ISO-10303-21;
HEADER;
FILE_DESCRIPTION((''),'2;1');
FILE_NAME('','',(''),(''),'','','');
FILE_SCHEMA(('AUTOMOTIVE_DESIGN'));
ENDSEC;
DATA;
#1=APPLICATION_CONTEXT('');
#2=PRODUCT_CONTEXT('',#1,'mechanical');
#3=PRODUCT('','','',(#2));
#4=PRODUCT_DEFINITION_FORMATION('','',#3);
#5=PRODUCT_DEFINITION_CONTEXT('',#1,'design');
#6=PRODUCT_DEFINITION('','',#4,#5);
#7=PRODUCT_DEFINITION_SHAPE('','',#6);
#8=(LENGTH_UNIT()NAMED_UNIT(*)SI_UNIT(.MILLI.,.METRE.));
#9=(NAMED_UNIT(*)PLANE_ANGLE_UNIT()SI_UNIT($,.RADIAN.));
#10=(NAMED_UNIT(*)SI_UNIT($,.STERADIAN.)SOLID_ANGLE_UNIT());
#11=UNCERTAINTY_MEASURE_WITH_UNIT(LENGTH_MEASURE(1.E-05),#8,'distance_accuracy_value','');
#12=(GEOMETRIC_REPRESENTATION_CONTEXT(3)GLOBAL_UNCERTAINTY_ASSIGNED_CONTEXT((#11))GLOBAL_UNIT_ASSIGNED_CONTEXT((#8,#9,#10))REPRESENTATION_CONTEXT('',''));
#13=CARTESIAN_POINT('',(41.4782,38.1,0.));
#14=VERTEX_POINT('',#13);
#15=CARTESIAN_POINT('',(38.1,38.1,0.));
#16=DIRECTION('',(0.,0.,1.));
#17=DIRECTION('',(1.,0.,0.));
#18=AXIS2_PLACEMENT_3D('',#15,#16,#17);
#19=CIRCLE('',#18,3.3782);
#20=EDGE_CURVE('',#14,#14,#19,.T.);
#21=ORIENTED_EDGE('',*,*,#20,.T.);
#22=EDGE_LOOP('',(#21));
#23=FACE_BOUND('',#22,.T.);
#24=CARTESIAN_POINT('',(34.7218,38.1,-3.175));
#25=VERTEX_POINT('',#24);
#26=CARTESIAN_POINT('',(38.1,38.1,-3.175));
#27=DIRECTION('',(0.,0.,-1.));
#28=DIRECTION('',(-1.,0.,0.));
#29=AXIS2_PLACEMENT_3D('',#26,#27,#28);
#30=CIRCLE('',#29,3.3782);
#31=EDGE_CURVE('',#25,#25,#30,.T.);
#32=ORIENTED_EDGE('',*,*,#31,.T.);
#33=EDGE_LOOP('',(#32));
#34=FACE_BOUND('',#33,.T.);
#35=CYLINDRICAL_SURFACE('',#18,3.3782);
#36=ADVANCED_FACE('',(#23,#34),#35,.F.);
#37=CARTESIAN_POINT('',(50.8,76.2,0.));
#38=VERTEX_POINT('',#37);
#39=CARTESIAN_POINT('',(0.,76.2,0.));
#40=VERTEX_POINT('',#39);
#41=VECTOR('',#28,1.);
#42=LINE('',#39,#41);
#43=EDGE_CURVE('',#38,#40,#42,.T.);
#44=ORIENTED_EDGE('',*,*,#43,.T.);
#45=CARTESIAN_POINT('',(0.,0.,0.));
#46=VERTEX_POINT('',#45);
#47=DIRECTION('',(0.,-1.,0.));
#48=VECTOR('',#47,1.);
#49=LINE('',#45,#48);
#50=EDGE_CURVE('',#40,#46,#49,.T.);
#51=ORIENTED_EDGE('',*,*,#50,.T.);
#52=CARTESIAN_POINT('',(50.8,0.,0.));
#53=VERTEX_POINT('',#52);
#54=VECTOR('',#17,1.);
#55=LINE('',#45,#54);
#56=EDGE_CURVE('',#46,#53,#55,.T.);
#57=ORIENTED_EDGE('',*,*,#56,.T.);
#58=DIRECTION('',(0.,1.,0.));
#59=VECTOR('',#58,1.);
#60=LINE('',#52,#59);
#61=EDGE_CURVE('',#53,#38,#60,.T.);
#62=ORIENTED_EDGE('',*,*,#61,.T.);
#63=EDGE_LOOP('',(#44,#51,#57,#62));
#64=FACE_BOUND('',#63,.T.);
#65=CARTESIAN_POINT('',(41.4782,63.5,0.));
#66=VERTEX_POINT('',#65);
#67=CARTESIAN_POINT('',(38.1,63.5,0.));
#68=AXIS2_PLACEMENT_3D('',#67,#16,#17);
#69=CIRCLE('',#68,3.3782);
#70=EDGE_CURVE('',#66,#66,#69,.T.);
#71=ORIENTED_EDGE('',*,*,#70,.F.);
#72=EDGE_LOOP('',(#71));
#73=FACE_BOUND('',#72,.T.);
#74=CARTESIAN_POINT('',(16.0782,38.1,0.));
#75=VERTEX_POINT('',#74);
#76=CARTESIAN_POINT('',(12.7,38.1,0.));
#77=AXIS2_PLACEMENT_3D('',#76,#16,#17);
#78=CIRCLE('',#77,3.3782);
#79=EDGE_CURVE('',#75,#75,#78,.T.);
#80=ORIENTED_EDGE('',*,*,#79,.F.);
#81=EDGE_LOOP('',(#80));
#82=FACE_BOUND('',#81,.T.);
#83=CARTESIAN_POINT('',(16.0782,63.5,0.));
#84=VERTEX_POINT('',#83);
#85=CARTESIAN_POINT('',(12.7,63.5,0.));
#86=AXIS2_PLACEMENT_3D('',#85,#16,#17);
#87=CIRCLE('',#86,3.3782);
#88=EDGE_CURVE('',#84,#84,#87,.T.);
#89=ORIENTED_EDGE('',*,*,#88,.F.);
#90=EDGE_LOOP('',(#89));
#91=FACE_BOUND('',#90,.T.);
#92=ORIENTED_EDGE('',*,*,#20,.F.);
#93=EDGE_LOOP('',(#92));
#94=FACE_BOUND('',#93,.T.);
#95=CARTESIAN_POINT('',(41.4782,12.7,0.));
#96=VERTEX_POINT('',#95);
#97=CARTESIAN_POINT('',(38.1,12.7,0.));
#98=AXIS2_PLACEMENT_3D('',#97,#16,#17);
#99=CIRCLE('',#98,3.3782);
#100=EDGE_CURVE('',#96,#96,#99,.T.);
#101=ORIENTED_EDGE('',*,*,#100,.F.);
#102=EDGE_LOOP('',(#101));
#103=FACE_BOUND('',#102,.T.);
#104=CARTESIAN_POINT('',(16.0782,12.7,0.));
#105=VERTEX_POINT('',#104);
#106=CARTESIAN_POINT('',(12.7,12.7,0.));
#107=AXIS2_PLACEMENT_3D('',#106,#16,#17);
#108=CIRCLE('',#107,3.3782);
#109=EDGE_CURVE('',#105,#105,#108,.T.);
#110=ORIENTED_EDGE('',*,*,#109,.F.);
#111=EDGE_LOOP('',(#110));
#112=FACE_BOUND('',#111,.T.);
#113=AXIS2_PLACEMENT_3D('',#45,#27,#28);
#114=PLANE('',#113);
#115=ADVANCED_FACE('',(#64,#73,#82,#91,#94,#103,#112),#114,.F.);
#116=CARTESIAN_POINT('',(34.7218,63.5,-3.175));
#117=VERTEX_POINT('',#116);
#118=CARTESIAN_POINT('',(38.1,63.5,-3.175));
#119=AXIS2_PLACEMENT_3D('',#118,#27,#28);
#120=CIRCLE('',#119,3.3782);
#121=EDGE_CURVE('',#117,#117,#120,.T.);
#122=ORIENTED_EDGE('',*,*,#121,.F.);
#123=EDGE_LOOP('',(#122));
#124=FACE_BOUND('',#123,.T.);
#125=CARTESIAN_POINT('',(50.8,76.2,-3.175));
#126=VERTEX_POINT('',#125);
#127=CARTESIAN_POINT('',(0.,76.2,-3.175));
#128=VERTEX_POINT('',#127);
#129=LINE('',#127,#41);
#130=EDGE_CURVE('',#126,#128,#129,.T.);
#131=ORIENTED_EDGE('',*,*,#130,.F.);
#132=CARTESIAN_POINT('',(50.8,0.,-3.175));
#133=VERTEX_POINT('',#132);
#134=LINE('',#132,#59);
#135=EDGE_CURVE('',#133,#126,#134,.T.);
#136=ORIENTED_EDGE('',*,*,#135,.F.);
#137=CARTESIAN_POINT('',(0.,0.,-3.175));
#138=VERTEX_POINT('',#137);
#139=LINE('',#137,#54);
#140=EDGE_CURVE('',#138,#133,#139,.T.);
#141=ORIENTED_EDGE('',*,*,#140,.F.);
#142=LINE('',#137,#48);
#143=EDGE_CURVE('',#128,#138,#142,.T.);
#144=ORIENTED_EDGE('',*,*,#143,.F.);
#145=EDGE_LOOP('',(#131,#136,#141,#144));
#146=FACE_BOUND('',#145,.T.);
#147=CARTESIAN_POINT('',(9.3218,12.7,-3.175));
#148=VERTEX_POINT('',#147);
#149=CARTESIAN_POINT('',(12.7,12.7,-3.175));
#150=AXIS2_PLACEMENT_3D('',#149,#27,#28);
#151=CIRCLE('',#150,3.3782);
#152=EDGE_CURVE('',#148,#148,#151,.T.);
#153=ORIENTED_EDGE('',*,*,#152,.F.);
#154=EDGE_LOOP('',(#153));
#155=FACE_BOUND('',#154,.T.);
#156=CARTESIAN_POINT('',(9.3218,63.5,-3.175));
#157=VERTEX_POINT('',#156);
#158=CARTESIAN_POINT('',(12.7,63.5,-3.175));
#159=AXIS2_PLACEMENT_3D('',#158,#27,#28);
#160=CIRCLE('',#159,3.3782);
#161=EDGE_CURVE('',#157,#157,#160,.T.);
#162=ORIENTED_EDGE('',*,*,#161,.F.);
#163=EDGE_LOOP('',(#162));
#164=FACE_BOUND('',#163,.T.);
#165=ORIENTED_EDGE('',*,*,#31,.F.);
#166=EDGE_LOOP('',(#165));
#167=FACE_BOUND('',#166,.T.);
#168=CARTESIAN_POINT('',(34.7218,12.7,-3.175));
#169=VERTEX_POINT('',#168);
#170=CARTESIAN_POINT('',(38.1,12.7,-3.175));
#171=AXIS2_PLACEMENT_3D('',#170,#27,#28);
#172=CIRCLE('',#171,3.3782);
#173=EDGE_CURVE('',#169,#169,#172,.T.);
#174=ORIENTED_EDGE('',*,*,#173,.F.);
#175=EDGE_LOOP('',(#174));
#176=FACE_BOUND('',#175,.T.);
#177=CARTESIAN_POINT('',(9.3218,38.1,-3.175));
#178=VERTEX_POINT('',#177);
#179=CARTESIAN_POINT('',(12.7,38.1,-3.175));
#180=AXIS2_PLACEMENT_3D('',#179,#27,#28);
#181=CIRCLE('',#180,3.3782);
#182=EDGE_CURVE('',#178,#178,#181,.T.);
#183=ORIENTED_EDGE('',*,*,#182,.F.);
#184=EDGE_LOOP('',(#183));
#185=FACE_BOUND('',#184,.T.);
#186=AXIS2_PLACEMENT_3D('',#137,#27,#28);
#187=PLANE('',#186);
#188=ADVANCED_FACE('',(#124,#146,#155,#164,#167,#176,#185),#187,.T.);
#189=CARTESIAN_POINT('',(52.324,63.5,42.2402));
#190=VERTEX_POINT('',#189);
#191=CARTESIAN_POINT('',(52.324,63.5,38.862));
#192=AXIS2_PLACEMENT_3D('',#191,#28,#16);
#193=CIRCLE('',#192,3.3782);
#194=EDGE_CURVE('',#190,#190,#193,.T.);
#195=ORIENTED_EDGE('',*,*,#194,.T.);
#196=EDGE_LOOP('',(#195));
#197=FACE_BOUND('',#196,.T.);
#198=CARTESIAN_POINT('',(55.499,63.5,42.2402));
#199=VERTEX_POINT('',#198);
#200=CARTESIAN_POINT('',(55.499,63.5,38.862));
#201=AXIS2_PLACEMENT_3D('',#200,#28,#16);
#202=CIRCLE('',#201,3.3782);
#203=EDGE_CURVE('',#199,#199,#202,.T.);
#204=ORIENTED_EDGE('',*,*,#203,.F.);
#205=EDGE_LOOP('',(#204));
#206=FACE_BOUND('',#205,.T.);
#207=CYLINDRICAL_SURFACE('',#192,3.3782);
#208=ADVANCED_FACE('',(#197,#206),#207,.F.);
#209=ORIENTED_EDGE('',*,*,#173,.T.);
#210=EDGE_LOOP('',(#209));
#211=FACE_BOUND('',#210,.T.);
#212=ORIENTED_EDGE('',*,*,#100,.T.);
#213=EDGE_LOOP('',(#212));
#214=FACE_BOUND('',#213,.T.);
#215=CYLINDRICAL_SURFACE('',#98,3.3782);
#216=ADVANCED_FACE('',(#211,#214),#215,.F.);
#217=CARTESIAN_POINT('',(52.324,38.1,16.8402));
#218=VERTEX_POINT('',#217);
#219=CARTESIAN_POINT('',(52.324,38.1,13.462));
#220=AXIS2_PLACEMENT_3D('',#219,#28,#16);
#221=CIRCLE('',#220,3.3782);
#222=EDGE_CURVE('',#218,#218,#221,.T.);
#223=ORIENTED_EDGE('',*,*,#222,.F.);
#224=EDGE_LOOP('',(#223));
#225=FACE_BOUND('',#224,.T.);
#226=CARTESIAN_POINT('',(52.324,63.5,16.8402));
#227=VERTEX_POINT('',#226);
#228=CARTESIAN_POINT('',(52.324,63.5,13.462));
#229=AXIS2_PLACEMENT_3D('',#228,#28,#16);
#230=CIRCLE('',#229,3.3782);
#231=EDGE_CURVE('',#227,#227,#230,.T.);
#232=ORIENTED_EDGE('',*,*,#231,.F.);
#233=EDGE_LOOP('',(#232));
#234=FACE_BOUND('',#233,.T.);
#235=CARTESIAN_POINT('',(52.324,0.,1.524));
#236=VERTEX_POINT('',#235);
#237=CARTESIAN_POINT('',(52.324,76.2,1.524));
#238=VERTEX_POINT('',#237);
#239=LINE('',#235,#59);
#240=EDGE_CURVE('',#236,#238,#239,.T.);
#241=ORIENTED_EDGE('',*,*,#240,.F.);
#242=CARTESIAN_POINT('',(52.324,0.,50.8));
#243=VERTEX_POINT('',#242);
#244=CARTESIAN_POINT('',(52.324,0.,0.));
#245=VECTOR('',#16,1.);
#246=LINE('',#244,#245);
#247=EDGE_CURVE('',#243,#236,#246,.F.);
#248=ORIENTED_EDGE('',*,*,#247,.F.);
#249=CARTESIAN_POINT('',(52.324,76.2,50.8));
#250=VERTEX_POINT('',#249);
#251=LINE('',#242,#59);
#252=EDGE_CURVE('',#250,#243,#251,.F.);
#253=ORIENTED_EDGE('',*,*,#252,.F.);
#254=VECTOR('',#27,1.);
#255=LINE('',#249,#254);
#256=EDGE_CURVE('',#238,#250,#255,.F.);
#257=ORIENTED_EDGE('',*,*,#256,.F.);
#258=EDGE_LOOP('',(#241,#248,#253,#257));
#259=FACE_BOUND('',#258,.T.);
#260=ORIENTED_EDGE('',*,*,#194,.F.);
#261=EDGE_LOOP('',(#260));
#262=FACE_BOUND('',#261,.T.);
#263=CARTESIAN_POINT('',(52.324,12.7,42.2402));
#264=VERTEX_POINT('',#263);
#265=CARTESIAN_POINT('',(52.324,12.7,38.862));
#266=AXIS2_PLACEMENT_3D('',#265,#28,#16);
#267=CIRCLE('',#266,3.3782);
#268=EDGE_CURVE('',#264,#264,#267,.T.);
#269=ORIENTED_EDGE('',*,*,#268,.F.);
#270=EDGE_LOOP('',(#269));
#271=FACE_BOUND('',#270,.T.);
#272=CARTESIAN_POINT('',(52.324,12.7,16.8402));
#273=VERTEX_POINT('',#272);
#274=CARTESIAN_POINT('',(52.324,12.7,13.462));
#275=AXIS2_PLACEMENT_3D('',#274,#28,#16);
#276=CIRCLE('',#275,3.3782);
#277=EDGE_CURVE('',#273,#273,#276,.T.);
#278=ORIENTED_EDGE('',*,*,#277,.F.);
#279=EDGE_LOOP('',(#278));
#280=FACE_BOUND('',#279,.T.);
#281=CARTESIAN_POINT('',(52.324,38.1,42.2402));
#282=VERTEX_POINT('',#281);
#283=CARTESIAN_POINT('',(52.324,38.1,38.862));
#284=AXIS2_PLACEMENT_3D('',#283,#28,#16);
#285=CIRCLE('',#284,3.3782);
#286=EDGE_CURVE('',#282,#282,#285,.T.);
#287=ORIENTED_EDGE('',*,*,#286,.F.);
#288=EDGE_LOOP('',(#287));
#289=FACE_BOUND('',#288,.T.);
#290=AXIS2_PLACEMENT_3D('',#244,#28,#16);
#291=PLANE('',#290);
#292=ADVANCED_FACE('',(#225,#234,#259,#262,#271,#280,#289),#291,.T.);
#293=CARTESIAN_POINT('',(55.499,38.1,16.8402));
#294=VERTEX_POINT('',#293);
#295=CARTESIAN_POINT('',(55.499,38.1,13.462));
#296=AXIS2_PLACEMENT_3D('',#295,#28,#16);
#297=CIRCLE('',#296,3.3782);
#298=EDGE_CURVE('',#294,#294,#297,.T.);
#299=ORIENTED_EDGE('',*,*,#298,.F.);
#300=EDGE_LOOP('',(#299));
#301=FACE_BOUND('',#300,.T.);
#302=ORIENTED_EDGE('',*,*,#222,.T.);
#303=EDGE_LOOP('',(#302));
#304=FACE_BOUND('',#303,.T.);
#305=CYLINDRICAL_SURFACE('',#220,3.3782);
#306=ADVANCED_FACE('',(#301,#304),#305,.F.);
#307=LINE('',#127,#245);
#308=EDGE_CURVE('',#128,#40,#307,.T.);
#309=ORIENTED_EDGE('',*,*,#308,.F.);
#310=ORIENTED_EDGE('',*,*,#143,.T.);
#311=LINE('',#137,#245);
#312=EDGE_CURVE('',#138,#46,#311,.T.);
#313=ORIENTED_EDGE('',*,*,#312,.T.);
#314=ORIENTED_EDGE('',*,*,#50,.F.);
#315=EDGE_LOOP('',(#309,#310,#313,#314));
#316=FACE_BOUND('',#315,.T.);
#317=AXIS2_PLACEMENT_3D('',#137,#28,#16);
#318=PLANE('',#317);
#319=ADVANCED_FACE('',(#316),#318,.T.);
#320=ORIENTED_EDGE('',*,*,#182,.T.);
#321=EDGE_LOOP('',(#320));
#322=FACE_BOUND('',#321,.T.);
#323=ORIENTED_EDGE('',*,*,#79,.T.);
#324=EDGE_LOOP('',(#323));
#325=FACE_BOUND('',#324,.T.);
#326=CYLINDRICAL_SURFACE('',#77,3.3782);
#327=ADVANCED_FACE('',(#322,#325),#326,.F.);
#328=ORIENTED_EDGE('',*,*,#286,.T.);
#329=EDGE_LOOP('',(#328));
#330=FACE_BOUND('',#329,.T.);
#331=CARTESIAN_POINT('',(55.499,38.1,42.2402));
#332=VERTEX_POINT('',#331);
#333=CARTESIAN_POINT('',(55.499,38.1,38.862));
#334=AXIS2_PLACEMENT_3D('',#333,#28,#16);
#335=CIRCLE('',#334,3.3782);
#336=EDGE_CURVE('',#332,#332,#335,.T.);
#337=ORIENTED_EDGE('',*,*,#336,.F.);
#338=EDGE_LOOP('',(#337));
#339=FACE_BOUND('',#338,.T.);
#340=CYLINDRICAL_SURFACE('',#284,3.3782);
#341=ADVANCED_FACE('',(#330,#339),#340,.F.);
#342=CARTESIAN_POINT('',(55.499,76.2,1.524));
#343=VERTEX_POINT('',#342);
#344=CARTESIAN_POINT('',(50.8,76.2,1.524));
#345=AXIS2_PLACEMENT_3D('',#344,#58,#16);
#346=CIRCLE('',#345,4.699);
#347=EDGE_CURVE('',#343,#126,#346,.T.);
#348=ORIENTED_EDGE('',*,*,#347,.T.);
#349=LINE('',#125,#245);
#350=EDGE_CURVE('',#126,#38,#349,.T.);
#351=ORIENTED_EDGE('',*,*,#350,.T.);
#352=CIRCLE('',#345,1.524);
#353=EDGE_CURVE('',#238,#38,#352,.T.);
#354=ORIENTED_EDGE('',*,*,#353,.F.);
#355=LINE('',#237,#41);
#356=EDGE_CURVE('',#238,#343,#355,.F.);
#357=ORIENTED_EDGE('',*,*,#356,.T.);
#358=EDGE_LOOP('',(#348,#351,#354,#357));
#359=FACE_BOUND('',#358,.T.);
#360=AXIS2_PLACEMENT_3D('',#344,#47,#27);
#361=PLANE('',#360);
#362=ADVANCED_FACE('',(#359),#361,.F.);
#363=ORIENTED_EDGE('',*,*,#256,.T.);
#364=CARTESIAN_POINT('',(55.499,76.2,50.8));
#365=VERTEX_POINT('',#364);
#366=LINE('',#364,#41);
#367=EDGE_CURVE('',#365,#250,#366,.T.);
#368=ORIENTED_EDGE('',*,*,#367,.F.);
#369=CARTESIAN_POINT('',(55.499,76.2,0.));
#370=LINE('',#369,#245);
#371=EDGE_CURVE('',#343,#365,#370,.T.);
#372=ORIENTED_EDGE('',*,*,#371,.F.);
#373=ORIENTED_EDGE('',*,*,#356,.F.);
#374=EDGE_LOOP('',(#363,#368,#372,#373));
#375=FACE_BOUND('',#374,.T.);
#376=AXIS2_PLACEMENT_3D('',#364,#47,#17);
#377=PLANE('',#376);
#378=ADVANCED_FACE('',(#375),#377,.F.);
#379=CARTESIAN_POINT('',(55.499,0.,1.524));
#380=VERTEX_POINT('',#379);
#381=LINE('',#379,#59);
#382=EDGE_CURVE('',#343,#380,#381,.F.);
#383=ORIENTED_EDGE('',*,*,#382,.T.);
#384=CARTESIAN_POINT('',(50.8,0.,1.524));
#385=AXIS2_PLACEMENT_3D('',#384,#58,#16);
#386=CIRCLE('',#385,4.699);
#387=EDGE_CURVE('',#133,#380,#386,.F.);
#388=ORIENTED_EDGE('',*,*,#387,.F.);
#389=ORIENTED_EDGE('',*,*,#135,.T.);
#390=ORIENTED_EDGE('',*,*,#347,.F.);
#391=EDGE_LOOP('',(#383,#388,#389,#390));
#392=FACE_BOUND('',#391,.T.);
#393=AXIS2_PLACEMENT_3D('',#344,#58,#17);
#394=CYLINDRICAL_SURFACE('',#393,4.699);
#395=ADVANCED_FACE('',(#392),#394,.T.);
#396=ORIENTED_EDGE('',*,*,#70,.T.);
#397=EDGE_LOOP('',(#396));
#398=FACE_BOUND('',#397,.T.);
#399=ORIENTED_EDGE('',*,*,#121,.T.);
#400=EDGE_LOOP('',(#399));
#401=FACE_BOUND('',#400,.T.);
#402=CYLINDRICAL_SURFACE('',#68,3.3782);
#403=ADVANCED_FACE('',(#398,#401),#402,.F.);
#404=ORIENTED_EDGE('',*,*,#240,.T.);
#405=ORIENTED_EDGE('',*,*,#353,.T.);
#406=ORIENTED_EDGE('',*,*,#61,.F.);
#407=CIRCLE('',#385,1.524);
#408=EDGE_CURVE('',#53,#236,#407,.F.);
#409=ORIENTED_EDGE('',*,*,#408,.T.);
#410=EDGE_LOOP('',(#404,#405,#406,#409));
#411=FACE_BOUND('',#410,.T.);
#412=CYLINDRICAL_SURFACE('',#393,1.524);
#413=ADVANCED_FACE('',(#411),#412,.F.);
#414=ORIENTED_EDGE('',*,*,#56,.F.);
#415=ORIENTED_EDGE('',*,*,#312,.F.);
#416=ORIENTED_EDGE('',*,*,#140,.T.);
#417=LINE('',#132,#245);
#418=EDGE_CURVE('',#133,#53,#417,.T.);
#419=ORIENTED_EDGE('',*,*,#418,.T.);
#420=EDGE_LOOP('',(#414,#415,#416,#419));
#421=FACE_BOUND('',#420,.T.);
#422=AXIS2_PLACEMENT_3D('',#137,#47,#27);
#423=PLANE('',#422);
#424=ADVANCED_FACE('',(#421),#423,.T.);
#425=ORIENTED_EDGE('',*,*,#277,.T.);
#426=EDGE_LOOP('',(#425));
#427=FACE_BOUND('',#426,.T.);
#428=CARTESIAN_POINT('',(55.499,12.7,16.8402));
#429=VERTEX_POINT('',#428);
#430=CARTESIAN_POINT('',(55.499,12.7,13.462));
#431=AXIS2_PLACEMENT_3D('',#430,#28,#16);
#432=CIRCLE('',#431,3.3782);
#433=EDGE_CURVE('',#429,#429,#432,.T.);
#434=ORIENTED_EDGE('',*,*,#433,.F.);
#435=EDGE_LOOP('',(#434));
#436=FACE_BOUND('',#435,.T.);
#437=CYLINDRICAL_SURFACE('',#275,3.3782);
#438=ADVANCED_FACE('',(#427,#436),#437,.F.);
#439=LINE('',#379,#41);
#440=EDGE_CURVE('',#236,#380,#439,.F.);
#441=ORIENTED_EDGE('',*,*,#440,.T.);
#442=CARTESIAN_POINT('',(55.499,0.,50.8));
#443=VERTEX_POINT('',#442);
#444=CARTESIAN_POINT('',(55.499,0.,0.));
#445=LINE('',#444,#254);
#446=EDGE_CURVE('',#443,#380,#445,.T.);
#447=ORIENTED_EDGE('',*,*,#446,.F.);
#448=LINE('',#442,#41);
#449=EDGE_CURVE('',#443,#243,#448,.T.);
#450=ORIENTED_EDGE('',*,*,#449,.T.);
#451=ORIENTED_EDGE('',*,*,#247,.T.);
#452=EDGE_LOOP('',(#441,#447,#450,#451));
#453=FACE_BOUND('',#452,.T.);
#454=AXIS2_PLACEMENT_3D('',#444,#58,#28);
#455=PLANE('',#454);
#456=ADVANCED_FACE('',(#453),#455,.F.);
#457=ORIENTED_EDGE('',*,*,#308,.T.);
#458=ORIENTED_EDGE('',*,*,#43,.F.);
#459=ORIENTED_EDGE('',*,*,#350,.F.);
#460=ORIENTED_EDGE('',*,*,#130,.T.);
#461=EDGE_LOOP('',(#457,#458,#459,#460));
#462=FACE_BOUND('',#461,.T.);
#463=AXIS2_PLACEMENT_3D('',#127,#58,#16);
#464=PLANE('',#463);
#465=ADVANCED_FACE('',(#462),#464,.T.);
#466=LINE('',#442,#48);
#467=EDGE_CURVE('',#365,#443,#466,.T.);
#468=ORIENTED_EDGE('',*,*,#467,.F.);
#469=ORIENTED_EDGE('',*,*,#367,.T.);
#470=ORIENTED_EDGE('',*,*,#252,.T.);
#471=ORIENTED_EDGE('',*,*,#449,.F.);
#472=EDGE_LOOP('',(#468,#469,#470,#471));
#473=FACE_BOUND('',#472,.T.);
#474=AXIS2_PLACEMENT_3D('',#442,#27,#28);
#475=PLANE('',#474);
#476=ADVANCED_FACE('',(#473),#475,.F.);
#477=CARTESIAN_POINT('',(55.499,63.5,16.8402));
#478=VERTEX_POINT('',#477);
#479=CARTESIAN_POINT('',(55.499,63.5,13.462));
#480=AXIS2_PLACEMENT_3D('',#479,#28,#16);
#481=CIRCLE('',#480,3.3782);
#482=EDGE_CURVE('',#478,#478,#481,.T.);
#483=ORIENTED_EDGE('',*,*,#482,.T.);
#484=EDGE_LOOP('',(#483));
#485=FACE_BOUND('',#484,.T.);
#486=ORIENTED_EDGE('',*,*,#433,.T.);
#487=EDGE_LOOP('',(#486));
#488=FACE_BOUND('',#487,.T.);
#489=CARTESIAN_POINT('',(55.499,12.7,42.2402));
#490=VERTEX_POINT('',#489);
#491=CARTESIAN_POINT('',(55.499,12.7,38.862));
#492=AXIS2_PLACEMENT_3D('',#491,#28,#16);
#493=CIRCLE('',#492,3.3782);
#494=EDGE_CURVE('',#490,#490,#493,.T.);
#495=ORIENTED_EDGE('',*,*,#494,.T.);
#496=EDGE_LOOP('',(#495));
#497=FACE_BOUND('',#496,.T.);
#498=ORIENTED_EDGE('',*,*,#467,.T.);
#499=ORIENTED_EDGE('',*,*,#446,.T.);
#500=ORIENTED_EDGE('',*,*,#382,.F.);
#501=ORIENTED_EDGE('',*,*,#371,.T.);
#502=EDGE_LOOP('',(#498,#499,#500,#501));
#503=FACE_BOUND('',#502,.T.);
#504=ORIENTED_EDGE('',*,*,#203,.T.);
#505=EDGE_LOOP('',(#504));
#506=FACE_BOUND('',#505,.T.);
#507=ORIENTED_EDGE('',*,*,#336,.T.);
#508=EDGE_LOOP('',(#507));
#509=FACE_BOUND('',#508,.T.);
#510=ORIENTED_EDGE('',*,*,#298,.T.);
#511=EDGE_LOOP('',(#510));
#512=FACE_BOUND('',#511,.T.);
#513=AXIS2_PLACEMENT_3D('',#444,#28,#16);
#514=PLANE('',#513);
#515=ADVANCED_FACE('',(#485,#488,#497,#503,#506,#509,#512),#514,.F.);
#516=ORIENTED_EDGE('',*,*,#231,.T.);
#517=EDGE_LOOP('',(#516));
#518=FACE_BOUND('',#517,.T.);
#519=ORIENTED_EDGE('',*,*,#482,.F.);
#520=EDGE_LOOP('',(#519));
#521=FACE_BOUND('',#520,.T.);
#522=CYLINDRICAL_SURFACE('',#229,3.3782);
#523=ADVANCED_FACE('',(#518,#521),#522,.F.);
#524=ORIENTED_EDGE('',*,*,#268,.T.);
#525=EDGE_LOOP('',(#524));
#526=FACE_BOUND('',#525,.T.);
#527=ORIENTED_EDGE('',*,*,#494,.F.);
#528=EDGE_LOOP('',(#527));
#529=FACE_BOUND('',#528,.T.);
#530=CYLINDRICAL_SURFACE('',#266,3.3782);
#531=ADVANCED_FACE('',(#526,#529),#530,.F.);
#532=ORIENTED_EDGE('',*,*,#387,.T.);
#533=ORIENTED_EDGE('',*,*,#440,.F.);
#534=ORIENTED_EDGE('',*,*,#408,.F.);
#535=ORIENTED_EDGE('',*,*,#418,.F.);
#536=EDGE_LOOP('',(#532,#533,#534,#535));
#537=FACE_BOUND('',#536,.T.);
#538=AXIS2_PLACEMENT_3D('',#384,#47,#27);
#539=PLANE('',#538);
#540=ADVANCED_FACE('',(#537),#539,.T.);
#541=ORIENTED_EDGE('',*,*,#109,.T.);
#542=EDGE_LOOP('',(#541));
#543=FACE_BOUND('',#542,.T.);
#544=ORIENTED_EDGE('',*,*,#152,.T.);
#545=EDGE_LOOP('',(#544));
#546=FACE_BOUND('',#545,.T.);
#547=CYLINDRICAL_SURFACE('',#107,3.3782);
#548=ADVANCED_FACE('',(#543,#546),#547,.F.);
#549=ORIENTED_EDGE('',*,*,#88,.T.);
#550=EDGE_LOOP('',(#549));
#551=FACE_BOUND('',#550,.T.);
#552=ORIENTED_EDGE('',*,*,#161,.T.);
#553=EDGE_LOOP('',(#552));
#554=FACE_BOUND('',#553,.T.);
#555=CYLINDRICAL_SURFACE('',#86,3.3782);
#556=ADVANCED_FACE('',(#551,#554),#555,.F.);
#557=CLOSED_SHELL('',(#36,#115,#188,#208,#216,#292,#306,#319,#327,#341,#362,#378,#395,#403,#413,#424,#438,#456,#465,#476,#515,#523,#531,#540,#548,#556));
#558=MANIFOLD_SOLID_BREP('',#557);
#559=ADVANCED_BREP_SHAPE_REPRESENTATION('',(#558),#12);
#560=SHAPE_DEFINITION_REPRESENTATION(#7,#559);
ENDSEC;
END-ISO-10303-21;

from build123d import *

# Parameters (mm, degrees)
SKETCH1_W               = 50.8
SKETCH1_H               = 76.2
BASE_FLANGE1_DEPTH      = 3.175
EDGE_FLANGE1_DEPTH      = 76.2
F_1_4_CLEARANCE_HOLE1_D = 6.7564
F_1_4_CLEARANCE_HOLE2_D = 6.7564


# Sheet-metal steps are written as plain solids
with BuildPart() as part:
    # Sketch1 → Base-Flange1 (new body)
    with BuildSketch(Plane.XY):
        with Locations((25.4, 38.1)):
            Rectangle(SKETCH1_W, SKETCH1_H)
    extrude(amount=-BASE_FLANGE1_DEPTH)

    # Edge-Flange1 section (across the edge) → Edge-Flange1 (add)
    with BuildSketch(Plane(origin=(52.324, 0, 0), x_dir=(-1, 0, 0), z_dir=(0, 1, 0))):
        with BuildLine():
            Line((-3.175, 1.524), (-3.175, 50.8))
            Line((-3.175, 50.8), (0, 50.8))
            Line((0, 50.8), (0, 1.524))
            ThreePointArc((0, 1.524), (0.446369265, 0.446369265), (1.524, 0))
            Line((1.524, 0), (1.524, -3.175))
            ThreePointArc((1.524, -3.175), (-1.798694765, -1.798694765), (-3.175, 1.524))
        make_face()
    extrude(amount=EDGE_FLANGE1_DEPTH)

    # 1/4 Clearance Hole1 (through all)
    with Locations(Plane.XY):
        with Locations((38.1, 63.5), (12.7, 63.5), (12.7, 38.1), (38.1, 38.1), (12.7, 12.7), (38.1, 12.7)):
            Hole(F_1_4_CLEARANCE_HOLE1_D / 2)

    # 1/4 Clearance Hole2 (through all)
    with Locations(Plane.ZY.offset(-52.324)):
        with Locations((13.462, 63.5), (38.862, 63.5), (13.462, 38.1), (38.862, 38.1), (13.462, 12.7), (38.862, 12.7)):
            Hole(F_1_4_CLEARANCE_HOLE2_D / 2)


solid = part.part
